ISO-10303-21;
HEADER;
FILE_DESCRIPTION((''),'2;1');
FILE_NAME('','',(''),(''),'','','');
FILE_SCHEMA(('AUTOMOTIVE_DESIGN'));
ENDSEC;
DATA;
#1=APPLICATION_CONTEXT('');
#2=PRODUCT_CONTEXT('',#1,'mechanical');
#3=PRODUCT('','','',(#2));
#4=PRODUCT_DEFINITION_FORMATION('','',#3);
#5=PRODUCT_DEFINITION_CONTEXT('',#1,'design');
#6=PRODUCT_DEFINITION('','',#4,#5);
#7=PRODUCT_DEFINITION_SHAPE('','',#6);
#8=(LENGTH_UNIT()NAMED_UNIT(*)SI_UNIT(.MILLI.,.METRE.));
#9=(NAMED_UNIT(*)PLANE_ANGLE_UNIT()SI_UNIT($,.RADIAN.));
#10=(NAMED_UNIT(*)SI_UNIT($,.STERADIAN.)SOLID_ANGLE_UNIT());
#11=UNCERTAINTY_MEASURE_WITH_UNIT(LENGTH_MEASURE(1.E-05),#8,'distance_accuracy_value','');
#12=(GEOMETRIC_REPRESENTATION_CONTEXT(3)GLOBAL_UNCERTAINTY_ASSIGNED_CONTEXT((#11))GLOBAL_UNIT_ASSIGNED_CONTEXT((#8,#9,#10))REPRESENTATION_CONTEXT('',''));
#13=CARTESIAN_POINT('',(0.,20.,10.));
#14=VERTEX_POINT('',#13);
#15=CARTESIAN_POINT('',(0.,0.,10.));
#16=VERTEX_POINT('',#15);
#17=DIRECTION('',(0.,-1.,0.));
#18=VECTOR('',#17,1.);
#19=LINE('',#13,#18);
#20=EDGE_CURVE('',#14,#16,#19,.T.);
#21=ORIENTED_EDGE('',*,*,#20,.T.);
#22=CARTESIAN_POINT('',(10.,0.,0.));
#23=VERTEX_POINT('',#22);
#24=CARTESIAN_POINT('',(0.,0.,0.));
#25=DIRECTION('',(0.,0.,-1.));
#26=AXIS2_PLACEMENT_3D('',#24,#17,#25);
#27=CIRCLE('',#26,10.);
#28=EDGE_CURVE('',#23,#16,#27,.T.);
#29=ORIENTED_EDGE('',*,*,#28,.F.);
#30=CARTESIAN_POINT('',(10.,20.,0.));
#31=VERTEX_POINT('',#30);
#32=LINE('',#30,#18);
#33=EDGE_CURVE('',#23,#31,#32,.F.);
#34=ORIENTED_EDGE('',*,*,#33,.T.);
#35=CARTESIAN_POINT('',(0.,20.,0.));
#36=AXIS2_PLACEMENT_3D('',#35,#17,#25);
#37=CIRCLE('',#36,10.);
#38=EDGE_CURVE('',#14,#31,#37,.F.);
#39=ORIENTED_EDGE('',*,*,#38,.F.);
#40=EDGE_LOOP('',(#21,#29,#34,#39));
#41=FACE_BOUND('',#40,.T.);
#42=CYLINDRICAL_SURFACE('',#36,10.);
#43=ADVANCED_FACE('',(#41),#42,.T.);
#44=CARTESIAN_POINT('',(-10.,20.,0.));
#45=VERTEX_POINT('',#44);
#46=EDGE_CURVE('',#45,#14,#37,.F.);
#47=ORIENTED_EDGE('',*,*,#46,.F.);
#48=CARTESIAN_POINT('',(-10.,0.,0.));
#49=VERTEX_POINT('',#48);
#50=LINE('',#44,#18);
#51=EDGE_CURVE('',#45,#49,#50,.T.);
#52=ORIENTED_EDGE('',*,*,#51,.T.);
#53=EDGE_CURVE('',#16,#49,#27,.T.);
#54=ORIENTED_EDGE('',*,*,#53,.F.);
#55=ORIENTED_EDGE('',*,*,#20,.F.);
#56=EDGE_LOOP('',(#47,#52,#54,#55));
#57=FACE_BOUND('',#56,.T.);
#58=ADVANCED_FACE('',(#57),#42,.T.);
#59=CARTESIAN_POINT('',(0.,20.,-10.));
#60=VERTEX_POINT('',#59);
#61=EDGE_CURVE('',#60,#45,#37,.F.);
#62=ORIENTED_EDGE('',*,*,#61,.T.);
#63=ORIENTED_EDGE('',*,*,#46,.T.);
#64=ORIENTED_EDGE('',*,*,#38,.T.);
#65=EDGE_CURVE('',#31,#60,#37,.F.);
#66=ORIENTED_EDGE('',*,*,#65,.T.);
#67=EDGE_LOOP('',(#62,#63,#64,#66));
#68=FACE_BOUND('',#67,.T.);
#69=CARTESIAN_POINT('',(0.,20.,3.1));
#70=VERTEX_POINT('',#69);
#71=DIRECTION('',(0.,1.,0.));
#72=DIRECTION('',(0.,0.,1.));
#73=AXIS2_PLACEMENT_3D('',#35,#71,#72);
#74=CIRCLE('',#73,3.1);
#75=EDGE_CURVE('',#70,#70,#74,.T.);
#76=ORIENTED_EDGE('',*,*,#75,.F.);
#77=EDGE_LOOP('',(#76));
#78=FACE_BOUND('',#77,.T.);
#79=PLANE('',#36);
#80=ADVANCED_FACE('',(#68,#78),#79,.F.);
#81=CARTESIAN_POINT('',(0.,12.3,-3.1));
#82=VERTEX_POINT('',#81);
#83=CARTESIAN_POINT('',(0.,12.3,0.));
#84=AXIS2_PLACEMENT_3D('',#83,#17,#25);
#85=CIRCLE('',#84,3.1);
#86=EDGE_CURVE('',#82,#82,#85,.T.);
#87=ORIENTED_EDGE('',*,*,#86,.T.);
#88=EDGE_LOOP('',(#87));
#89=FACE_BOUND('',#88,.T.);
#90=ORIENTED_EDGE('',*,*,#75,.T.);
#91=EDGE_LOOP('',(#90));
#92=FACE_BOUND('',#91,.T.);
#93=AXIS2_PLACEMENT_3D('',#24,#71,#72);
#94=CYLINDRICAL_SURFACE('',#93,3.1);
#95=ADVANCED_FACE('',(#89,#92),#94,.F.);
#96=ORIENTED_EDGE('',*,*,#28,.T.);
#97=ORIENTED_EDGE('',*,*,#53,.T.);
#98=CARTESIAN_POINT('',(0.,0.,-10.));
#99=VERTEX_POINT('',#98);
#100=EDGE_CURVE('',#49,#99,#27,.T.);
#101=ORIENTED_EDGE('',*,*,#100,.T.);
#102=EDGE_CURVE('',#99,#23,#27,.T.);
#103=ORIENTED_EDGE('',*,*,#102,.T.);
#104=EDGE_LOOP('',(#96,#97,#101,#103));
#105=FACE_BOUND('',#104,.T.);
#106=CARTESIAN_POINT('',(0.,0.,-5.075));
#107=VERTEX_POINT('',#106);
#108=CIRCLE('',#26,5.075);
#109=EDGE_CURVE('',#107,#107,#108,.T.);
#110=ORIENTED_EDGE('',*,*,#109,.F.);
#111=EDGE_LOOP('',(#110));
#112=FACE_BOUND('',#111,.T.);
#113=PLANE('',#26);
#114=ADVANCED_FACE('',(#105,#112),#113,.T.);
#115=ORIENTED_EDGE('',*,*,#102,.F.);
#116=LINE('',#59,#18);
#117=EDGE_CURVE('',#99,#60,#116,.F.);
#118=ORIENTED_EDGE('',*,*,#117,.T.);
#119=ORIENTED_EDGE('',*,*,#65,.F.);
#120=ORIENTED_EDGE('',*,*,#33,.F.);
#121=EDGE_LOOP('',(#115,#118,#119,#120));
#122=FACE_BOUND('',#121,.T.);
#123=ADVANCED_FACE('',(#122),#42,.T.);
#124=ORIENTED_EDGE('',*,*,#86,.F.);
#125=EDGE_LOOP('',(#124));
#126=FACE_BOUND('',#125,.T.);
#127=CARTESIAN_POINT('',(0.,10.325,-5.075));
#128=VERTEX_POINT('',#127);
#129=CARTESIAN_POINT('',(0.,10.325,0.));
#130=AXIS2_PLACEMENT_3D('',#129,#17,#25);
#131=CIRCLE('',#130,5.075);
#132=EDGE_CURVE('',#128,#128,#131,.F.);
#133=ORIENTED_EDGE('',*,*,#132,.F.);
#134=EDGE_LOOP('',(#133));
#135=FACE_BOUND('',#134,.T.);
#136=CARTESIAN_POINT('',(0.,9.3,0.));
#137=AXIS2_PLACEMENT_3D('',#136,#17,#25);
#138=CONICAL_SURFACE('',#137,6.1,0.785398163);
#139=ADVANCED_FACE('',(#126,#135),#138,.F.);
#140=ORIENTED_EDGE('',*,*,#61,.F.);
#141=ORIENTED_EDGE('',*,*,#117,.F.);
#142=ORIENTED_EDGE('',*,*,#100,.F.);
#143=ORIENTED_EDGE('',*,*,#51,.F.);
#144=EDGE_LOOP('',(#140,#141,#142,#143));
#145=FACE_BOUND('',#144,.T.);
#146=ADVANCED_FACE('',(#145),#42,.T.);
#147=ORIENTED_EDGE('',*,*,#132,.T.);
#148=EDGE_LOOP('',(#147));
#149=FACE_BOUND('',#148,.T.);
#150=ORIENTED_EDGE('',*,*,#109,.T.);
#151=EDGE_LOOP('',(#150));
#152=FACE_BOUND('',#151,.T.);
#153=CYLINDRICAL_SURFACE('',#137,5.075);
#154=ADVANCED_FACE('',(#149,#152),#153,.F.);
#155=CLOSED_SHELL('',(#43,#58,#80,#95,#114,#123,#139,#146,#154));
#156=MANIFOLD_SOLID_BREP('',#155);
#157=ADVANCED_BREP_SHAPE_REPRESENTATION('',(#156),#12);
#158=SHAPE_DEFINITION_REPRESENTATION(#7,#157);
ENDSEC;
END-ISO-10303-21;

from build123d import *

# Parameters (mm, degrees)
SKETCH1_W           = 20
SKETCH1_H           = 20
BOSS_EXTRUDE1_DEPTH = 20
SKETCH2_R           = 3.1
CUT_EXTRUDE1_DEPTH  = 20
SKETCH3_R           = 5.075
CUT_EXTRUDE2_DEPTH  = 9.3
CHAMFER1_SIZE       = 3
FILLET1_R           = 10


# Some blends are built 0.0001 mm under size
with BuildPart() as part:
    # Sketch1 → Boss-Extrude1 (new body)
    with BuildSketch(Plane(origin=(0, 0, 0), x_dir=(1, 0, 0), z_dir=(0, 1, 0))):
        Rectangle(SKETCH1_W, SKETCH1_H)
    extrude(amount=BOSS_EXTRUDE1_DEPTH)

    # Sketch2 → Cut-Extrude1 (cut)
    with BuildSketch(Plane(origin=(0, 20, 0), x_dir=(1, 0, 0), z_dir=(0, 1, 0))):
        with Locations(Location((0, 0, 0), (0, 0, 270))):
            Circle(SKETCH2_R)
    extrude(amount=-CUT_EXTRUDE1_DEPTH, mode=Mode.SUBTRACT)

    # Sketch3 → Cut-Extrude2 (cut)
    with BuildSketch(Plane.XZ):
        with Locations(Location((0, 0, 0), (0, 0, 270))):
            Circle(SKETCH3_R)
    extrude(amount=-CUT_EXTRUDE2_DEPTH, mode=Mode.SUBTRACT)

    # Chamfer1
    # the kernel refuses this chamfer: 3 mm, written as the material it takes off along each edge
    with BuildSketch(Plane(origin=(0, 9.3, 0), x_dir=(0, 0, 1), z_dir=(-1, 0, 0))) as chamfer1_piece_1_section:
        Polygon((3.1, CHAMFER1_SIZE), (3.1 + CHAMFER1_SIZE, 0), (3.1, 0), align=None)
    chamfer1_piece_1 = revolve(axis=Axis((0, 9.3, 0), (0, 1, 0)), mode=Mode.PRIVATE)
    chamfer1_piece_1 = chamfer1_piece_1 & Plane(origin=(0, 11.321537765, 0), x_dir=(0, 0, -1), z_dir=(0, -1, 0)) * Cylinder(5.075, 25, mode=Mode.PRIVATE)
    add(chamfer1_piece_1, mode=Mode.SUBTRACT)

    # Fillet1
    fillet1_edges = [part.edges().sort_by_distance(p)[0] for p in [
        (10, 10, 10),
        (10, 10, -10),
        (-10, 10, -10),
        (-10, 10, 10),
    ]]
    fillet(fillet1_edges, radius=FILLET1_R - 0.0001)  # a hair under: the kernel refuses the full size


solid = part.part
